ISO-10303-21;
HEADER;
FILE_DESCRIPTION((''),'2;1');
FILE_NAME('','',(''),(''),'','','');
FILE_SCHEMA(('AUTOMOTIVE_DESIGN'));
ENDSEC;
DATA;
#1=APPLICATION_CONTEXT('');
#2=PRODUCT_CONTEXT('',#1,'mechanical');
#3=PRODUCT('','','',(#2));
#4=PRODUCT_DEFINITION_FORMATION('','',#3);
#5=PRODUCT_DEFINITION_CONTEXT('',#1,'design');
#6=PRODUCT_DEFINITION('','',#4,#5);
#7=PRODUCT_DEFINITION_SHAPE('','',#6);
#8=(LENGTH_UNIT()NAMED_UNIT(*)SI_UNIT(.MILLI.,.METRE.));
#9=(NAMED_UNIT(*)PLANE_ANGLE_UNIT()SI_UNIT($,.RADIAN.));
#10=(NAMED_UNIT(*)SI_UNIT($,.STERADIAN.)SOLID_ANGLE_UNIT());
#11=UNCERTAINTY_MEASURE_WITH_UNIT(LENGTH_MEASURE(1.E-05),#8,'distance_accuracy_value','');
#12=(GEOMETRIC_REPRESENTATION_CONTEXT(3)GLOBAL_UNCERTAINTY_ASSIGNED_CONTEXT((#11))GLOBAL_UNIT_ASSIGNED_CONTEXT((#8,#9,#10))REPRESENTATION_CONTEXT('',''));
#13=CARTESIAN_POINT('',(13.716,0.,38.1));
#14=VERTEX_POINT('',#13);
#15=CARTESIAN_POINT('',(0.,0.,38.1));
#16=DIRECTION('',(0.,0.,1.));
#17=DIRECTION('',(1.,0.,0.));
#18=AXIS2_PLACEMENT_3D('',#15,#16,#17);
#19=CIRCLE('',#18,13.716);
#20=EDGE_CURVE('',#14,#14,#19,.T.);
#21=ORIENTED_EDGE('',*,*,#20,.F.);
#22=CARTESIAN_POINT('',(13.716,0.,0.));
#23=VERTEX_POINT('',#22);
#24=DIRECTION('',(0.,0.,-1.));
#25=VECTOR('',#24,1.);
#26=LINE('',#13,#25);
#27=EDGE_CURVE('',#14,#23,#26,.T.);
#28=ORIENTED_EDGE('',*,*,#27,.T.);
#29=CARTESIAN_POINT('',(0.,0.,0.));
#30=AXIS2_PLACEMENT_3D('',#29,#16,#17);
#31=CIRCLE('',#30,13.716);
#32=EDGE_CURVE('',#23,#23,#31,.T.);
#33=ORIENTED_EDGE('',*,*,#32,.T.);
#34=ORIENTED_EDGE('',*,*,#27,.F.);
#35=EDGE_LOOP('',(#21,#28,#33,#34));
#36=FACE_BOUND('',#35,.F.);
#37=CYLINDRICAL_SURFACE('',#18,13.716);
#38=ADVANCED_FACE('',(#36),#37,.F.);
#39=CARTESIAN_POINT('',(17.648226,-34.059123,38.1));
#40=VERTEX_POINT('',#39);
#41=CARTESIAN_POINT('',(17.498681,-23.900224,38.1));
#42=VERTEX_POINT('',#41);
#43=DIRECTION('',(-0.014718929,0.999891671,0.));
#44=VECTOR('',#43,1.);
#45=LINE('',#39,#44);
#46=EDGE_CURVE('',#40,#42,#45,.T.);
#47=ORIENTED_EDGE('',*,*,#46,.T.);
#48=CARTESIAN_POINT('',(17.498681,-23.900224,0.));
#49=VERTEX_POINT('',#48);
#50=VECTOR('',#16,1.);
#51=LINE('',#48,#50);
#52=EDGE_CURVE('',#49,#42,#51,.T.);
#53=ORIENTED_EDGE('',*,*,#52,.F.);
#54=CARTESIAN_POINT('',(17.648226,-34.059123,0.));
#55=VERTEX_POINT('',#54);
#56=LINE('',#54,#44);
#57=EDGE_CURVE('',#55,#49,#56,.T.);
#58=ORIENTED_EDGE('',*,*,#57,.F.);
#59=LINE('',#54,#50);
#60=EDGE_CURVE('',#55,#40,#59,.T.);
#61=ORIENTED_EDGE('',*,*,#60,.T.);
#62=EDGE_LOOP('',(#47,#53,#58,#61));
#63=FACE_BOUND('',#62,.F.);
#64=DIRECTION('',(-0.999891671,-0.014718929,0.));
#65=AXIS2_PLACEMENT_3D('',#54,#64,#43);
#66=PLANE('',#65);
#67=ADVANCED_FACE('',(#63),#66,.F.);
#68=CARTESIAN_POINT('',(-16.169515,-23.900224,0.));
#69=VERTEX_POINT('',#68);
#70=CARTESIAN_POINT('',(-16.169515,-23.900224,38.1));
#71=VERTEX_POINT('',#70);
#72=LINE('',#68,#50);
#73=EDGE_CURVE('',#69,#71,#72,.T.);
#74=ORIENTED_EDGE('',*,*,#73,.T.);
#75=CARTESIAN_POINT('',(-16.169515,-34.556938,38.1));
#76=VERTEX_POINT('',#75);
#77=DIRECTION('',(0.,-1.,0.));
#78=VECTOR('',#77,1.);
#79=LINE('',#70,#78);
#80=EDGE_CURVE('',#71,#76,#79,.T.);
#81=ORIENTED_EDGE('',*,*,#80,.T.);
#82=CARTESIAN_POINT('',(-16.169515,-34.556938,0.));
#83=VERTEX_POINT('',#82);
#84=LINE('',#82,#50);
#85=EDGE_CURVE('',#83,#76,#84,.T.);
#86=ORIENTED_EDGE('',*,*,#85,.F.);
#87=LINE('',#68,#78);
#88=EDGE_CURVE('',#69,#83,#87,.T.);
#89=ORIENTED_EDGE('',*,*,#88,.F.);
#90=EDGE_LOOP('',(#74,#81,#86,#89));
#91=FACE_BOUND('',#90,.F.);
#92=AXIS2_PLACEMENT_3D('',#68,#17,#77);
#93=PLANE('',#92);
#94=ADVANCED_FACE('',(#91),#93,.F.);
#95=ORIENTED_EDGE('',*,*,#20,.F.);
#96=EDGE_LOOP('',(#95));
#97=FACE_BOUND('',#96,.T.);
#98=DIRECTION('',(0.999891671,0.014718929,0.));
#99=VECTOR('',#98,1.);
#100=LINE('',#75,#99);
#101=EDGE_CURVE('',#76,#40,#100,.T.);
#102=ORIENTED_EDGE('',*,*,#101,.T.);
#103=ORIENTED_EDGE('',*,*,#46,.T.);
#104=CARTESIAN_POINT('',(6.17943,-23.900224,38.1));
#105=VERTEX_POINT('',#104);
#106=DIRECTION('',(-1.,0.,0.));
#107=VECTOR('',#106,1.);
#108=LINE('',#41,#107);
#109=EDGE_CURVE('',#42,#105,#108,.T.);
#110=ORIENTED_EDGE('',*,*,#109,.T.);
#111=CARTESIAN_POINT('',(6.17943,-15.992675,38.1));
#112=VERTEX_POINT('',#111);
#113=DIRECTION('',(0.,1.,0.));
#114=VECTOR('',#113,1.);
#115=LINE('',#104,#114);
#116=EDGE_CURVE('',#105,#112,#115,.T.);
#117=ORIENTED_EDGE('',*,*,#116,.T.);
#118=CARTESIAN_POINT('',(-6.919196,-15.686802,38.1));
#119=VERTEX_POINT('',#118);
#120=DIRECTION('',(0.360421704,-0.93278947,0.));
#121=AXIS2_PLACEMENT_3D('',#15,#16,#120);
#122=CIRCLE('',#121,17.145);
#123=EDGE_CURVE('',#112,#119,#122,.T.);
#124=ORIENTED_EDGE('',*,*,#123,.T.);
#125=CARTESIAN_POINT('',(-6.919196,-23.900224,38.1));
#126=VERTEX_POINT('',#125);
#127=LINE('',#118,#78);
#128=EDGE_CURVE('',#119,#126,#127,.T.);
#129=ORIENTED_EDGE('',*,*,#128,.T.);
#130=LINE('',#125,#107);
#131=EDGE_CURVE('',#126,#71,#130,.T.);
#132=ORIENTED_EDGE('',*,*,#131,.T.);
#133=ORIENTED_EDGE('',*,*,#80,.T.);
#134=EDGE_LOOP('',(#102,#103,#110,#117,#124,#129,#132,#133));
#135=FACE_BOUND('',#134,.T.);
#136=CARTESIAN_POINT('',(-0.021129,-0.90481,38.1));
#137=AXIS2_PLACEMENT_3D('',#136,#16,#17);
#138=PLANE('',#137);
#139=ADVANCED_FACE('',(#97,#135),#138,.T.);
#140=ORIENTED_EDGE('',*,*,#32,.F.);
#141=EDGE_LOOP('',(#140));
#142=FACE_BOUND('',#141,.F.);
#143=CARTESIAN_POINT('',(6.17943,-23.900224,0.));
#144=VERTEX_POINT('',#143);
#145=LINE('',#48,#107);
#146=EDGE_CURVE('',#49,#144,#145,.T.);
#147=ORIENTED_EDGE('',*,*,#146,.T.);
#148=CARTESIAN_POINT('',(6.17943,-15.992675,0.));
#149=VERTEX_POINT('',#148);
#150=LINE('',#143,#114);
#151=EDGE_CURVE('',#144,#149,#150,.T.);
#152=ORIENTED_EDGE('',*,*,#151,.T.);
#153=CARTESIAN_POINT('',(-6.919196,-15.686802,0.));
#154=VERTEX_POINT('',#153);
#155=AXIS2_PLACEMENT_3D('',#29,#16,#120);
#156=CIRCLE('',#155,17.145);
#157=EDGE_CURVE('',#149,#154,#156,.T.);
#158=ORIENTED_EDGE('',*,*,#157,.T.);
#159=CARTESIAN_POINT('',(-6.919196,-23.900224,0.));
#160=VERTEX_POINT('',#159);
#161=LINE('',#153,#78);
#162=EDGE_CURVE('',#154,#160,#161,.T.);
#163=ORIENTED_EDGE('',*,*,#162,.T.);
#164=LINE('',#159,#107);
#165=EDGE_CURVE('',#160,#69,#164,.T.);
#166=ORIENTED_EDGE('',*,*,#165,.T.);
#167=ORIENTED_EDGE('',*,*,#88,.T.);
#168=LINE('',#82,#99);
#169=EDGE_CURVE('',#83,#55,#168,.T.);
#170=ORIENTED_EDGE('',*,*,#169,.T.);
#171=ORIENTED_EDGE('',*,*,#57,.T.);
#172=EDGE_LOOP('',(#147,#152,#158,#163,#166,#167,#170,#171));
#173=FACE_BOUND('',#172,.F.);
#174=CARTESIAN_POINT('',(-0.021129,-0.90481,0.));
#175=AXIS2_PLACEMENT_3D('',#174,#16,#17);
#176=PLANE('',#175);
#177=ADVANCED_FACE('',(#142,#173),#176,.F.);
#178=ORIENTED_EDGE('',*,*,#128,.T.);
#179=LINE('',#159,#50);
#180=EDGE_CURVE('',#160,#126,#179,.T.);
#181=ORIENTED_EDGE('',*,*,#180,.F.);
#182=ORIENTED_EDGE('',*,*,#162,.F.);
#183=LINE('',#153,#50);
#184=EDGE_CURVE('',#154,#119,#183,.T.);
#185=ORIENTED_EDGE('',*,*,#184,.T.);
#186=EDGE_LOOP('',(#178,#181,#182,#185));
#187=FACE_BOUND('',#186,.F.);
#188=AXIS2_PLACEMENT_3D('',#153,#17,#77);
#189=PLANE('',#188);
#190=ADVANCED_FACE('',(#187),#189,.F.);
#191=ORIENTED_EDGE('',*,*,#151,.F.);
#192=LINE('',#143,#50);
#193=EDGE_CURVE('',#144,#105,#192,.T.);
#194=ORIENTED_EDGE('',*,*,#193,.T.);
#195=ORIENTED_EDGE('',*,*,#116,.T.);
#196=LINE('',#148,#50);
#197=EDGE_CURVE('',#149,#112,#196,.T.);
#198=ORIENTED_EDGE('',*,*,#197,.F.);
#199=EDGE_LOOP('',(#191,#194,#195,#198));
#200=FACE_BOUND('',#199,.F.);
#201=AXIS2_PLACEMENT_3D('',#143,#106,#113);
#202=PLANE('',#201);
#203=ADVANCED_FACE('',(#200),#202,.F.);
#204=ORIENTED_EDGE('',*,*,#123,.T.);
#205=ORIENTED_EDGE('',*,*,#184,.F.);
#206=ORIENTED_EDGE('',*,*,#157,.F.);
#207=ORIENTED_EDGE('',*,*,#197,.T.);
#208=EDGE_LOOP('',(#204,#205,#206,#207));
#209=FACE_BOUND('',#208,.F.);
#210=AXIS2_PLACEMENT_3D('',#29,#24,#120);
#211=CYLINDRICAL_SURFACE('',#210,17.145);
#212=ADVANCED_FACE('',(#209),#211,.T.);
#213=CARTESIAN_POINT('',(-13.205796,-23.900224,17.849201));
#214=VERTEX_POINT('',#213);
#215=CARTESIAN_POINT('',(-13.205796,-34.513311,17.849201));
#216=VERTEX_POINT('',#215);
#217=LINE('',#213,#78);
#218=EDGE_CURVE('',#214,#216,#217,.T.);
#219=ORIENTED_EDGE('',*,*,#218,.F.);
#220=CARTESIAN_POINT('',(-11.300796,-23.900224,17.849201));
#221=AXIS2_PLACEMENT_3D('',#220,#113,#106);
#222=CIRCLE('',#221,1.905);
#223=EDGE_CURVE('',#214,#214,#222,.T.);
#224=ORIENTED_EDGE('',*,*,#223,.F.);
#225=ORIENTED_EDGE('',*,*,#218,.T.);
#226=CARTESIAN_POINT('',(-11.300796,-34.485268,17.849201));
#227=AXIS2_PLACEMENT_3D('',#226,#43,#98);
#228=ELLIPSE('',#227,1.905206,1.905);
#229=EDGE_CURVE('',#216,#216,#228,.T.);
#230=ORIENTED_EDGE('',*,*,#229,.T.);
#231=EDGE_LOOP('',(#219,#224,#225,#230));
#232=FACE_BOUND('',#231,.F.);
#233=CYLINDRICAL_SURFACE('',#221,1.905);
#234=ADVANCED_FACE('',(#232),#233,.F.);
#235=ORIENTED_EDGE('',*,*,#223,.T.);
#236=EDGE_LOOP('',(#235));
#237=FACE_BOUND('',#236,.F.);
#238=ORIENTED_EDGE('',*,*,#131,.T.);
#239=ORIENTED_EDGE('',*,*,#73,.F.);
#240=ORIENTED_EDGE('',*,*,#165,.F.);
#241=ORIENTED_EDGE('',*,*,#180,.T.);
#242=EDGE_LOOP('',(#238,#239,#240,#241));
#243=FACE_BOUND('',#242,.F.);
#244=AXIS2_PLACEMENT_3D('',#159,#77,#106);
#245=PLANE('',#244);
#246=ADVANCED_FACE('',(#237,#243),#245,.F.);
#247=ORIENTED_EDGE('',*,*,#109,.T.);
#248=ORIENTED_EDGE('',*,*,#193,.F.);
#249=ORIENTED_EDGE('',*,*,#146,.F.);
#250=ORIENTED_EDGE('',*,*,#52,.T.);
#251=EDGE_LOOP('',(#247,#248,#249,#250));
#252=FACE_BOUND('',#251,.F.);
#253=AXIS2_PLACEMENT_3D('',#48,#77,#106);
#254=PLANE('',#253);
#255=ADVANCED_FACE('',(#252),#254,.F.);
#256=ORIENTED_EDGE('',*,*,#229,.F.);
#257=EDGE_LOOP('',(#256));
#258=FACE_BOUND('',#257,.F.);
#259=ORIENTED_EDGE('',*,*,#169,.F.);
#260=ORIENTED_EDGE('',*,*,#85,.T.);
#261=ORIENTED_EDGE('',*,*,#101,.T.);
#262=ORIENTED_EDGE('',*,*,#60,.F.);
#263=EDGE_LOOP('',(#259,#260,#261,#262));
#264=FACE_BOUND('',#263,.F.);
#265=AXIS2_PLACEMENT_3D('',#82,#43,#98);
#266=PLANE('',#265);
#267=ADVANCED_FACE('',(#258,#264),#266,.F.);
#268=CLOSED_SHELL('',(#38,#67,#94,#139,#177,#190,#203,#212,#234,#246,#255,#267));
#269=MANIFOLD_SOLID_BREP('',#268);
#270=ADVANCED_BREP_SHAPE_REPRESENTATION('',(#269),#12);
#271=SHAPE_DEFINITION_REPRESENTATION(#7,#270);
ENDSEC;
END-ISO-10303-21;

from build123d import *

# Parameters (mm, degrees)
F1_DEPTH = 38.1
F2_R     = 13.716
F3_DEPTH = 50.292
F4_R     = 1.905
F5_DEPTH = 25.4


# Not quite as in the source:
# - a feature names something its author has since deleted; it is built from what else it names


with BuildPart() as f1:
    # F0 (on Top) → F1 (new body)
    with BuildSketch(Plane.XY):
        with BuildLine():
            ThreePointArc((6.1794301228, -15.9926754597), (14.1403209733, -9.6954807912), (17.145, 0))
            ThreePointArc((17.145, 0), (-9.3627294025, 14.3628104191), (-6.9191963412, -15.6868016814))
            ThreePointArc((-6.9191963412, -15.6868016814), (-0.4002539276, -17.1403273537), (6.1794301228, -15.9926754597))
        make_face()
        with BuildLine():
            ThreePointArc((6.1794301228, -15.9926754597), (-0.4002539276, -17.1403273537), (-6.9191963412, -15.6868016814))
            Line((-6.9191963412, -15.6868016814), (-6.9191963412, -23.9002238959))
            Line((-6.9191963412, -23.9002238959), (-16.1695149392, -23.9002238959))
            Line((-16.1695149392, -23.9002238959), (-16.1695149392, -34.5569381251))
            Line((-16.1695149392, -34.5569381251), (17.6482256417, -34.0591232702))
            Line((17.6482256417, -34.0591232702), (17.4986813217, -23.9002238959))
            Line((17.4986813217, -23.9002238959), (6.1794301228, -23.9002238959))
            Line((6.1794301228, -23.9002238959), (6.1794301228, -21.5747152004))
            Line((6.1794301228, -21.5747152004), (6.1794301228, -15.9926754597))
        make_face()
    extrude(amount=F1_DEPTH)

    # F2 (on face) → F3 (cut)
    with BuildSketch(Plane.XY.offset(38.1)):
        Circle(F2_R)
    extrude(amount=-F3_DEPTH, mode=Mode.SUBTRACT)

    # F4 (on face) → F5 (cut)
    with BuildSketch(Plane(origin=(0, -23.9002238959, 0), x_dir=(-1, 0, 0), z_dir=(0, 1, 0))):
        with Locations((11.3007957116, 17.8492013365)):
            Circle(F4_R)
    extrude(amount=-F5_DEPTH, mode=Mode.SUBTRACT)


solid = f1.part
